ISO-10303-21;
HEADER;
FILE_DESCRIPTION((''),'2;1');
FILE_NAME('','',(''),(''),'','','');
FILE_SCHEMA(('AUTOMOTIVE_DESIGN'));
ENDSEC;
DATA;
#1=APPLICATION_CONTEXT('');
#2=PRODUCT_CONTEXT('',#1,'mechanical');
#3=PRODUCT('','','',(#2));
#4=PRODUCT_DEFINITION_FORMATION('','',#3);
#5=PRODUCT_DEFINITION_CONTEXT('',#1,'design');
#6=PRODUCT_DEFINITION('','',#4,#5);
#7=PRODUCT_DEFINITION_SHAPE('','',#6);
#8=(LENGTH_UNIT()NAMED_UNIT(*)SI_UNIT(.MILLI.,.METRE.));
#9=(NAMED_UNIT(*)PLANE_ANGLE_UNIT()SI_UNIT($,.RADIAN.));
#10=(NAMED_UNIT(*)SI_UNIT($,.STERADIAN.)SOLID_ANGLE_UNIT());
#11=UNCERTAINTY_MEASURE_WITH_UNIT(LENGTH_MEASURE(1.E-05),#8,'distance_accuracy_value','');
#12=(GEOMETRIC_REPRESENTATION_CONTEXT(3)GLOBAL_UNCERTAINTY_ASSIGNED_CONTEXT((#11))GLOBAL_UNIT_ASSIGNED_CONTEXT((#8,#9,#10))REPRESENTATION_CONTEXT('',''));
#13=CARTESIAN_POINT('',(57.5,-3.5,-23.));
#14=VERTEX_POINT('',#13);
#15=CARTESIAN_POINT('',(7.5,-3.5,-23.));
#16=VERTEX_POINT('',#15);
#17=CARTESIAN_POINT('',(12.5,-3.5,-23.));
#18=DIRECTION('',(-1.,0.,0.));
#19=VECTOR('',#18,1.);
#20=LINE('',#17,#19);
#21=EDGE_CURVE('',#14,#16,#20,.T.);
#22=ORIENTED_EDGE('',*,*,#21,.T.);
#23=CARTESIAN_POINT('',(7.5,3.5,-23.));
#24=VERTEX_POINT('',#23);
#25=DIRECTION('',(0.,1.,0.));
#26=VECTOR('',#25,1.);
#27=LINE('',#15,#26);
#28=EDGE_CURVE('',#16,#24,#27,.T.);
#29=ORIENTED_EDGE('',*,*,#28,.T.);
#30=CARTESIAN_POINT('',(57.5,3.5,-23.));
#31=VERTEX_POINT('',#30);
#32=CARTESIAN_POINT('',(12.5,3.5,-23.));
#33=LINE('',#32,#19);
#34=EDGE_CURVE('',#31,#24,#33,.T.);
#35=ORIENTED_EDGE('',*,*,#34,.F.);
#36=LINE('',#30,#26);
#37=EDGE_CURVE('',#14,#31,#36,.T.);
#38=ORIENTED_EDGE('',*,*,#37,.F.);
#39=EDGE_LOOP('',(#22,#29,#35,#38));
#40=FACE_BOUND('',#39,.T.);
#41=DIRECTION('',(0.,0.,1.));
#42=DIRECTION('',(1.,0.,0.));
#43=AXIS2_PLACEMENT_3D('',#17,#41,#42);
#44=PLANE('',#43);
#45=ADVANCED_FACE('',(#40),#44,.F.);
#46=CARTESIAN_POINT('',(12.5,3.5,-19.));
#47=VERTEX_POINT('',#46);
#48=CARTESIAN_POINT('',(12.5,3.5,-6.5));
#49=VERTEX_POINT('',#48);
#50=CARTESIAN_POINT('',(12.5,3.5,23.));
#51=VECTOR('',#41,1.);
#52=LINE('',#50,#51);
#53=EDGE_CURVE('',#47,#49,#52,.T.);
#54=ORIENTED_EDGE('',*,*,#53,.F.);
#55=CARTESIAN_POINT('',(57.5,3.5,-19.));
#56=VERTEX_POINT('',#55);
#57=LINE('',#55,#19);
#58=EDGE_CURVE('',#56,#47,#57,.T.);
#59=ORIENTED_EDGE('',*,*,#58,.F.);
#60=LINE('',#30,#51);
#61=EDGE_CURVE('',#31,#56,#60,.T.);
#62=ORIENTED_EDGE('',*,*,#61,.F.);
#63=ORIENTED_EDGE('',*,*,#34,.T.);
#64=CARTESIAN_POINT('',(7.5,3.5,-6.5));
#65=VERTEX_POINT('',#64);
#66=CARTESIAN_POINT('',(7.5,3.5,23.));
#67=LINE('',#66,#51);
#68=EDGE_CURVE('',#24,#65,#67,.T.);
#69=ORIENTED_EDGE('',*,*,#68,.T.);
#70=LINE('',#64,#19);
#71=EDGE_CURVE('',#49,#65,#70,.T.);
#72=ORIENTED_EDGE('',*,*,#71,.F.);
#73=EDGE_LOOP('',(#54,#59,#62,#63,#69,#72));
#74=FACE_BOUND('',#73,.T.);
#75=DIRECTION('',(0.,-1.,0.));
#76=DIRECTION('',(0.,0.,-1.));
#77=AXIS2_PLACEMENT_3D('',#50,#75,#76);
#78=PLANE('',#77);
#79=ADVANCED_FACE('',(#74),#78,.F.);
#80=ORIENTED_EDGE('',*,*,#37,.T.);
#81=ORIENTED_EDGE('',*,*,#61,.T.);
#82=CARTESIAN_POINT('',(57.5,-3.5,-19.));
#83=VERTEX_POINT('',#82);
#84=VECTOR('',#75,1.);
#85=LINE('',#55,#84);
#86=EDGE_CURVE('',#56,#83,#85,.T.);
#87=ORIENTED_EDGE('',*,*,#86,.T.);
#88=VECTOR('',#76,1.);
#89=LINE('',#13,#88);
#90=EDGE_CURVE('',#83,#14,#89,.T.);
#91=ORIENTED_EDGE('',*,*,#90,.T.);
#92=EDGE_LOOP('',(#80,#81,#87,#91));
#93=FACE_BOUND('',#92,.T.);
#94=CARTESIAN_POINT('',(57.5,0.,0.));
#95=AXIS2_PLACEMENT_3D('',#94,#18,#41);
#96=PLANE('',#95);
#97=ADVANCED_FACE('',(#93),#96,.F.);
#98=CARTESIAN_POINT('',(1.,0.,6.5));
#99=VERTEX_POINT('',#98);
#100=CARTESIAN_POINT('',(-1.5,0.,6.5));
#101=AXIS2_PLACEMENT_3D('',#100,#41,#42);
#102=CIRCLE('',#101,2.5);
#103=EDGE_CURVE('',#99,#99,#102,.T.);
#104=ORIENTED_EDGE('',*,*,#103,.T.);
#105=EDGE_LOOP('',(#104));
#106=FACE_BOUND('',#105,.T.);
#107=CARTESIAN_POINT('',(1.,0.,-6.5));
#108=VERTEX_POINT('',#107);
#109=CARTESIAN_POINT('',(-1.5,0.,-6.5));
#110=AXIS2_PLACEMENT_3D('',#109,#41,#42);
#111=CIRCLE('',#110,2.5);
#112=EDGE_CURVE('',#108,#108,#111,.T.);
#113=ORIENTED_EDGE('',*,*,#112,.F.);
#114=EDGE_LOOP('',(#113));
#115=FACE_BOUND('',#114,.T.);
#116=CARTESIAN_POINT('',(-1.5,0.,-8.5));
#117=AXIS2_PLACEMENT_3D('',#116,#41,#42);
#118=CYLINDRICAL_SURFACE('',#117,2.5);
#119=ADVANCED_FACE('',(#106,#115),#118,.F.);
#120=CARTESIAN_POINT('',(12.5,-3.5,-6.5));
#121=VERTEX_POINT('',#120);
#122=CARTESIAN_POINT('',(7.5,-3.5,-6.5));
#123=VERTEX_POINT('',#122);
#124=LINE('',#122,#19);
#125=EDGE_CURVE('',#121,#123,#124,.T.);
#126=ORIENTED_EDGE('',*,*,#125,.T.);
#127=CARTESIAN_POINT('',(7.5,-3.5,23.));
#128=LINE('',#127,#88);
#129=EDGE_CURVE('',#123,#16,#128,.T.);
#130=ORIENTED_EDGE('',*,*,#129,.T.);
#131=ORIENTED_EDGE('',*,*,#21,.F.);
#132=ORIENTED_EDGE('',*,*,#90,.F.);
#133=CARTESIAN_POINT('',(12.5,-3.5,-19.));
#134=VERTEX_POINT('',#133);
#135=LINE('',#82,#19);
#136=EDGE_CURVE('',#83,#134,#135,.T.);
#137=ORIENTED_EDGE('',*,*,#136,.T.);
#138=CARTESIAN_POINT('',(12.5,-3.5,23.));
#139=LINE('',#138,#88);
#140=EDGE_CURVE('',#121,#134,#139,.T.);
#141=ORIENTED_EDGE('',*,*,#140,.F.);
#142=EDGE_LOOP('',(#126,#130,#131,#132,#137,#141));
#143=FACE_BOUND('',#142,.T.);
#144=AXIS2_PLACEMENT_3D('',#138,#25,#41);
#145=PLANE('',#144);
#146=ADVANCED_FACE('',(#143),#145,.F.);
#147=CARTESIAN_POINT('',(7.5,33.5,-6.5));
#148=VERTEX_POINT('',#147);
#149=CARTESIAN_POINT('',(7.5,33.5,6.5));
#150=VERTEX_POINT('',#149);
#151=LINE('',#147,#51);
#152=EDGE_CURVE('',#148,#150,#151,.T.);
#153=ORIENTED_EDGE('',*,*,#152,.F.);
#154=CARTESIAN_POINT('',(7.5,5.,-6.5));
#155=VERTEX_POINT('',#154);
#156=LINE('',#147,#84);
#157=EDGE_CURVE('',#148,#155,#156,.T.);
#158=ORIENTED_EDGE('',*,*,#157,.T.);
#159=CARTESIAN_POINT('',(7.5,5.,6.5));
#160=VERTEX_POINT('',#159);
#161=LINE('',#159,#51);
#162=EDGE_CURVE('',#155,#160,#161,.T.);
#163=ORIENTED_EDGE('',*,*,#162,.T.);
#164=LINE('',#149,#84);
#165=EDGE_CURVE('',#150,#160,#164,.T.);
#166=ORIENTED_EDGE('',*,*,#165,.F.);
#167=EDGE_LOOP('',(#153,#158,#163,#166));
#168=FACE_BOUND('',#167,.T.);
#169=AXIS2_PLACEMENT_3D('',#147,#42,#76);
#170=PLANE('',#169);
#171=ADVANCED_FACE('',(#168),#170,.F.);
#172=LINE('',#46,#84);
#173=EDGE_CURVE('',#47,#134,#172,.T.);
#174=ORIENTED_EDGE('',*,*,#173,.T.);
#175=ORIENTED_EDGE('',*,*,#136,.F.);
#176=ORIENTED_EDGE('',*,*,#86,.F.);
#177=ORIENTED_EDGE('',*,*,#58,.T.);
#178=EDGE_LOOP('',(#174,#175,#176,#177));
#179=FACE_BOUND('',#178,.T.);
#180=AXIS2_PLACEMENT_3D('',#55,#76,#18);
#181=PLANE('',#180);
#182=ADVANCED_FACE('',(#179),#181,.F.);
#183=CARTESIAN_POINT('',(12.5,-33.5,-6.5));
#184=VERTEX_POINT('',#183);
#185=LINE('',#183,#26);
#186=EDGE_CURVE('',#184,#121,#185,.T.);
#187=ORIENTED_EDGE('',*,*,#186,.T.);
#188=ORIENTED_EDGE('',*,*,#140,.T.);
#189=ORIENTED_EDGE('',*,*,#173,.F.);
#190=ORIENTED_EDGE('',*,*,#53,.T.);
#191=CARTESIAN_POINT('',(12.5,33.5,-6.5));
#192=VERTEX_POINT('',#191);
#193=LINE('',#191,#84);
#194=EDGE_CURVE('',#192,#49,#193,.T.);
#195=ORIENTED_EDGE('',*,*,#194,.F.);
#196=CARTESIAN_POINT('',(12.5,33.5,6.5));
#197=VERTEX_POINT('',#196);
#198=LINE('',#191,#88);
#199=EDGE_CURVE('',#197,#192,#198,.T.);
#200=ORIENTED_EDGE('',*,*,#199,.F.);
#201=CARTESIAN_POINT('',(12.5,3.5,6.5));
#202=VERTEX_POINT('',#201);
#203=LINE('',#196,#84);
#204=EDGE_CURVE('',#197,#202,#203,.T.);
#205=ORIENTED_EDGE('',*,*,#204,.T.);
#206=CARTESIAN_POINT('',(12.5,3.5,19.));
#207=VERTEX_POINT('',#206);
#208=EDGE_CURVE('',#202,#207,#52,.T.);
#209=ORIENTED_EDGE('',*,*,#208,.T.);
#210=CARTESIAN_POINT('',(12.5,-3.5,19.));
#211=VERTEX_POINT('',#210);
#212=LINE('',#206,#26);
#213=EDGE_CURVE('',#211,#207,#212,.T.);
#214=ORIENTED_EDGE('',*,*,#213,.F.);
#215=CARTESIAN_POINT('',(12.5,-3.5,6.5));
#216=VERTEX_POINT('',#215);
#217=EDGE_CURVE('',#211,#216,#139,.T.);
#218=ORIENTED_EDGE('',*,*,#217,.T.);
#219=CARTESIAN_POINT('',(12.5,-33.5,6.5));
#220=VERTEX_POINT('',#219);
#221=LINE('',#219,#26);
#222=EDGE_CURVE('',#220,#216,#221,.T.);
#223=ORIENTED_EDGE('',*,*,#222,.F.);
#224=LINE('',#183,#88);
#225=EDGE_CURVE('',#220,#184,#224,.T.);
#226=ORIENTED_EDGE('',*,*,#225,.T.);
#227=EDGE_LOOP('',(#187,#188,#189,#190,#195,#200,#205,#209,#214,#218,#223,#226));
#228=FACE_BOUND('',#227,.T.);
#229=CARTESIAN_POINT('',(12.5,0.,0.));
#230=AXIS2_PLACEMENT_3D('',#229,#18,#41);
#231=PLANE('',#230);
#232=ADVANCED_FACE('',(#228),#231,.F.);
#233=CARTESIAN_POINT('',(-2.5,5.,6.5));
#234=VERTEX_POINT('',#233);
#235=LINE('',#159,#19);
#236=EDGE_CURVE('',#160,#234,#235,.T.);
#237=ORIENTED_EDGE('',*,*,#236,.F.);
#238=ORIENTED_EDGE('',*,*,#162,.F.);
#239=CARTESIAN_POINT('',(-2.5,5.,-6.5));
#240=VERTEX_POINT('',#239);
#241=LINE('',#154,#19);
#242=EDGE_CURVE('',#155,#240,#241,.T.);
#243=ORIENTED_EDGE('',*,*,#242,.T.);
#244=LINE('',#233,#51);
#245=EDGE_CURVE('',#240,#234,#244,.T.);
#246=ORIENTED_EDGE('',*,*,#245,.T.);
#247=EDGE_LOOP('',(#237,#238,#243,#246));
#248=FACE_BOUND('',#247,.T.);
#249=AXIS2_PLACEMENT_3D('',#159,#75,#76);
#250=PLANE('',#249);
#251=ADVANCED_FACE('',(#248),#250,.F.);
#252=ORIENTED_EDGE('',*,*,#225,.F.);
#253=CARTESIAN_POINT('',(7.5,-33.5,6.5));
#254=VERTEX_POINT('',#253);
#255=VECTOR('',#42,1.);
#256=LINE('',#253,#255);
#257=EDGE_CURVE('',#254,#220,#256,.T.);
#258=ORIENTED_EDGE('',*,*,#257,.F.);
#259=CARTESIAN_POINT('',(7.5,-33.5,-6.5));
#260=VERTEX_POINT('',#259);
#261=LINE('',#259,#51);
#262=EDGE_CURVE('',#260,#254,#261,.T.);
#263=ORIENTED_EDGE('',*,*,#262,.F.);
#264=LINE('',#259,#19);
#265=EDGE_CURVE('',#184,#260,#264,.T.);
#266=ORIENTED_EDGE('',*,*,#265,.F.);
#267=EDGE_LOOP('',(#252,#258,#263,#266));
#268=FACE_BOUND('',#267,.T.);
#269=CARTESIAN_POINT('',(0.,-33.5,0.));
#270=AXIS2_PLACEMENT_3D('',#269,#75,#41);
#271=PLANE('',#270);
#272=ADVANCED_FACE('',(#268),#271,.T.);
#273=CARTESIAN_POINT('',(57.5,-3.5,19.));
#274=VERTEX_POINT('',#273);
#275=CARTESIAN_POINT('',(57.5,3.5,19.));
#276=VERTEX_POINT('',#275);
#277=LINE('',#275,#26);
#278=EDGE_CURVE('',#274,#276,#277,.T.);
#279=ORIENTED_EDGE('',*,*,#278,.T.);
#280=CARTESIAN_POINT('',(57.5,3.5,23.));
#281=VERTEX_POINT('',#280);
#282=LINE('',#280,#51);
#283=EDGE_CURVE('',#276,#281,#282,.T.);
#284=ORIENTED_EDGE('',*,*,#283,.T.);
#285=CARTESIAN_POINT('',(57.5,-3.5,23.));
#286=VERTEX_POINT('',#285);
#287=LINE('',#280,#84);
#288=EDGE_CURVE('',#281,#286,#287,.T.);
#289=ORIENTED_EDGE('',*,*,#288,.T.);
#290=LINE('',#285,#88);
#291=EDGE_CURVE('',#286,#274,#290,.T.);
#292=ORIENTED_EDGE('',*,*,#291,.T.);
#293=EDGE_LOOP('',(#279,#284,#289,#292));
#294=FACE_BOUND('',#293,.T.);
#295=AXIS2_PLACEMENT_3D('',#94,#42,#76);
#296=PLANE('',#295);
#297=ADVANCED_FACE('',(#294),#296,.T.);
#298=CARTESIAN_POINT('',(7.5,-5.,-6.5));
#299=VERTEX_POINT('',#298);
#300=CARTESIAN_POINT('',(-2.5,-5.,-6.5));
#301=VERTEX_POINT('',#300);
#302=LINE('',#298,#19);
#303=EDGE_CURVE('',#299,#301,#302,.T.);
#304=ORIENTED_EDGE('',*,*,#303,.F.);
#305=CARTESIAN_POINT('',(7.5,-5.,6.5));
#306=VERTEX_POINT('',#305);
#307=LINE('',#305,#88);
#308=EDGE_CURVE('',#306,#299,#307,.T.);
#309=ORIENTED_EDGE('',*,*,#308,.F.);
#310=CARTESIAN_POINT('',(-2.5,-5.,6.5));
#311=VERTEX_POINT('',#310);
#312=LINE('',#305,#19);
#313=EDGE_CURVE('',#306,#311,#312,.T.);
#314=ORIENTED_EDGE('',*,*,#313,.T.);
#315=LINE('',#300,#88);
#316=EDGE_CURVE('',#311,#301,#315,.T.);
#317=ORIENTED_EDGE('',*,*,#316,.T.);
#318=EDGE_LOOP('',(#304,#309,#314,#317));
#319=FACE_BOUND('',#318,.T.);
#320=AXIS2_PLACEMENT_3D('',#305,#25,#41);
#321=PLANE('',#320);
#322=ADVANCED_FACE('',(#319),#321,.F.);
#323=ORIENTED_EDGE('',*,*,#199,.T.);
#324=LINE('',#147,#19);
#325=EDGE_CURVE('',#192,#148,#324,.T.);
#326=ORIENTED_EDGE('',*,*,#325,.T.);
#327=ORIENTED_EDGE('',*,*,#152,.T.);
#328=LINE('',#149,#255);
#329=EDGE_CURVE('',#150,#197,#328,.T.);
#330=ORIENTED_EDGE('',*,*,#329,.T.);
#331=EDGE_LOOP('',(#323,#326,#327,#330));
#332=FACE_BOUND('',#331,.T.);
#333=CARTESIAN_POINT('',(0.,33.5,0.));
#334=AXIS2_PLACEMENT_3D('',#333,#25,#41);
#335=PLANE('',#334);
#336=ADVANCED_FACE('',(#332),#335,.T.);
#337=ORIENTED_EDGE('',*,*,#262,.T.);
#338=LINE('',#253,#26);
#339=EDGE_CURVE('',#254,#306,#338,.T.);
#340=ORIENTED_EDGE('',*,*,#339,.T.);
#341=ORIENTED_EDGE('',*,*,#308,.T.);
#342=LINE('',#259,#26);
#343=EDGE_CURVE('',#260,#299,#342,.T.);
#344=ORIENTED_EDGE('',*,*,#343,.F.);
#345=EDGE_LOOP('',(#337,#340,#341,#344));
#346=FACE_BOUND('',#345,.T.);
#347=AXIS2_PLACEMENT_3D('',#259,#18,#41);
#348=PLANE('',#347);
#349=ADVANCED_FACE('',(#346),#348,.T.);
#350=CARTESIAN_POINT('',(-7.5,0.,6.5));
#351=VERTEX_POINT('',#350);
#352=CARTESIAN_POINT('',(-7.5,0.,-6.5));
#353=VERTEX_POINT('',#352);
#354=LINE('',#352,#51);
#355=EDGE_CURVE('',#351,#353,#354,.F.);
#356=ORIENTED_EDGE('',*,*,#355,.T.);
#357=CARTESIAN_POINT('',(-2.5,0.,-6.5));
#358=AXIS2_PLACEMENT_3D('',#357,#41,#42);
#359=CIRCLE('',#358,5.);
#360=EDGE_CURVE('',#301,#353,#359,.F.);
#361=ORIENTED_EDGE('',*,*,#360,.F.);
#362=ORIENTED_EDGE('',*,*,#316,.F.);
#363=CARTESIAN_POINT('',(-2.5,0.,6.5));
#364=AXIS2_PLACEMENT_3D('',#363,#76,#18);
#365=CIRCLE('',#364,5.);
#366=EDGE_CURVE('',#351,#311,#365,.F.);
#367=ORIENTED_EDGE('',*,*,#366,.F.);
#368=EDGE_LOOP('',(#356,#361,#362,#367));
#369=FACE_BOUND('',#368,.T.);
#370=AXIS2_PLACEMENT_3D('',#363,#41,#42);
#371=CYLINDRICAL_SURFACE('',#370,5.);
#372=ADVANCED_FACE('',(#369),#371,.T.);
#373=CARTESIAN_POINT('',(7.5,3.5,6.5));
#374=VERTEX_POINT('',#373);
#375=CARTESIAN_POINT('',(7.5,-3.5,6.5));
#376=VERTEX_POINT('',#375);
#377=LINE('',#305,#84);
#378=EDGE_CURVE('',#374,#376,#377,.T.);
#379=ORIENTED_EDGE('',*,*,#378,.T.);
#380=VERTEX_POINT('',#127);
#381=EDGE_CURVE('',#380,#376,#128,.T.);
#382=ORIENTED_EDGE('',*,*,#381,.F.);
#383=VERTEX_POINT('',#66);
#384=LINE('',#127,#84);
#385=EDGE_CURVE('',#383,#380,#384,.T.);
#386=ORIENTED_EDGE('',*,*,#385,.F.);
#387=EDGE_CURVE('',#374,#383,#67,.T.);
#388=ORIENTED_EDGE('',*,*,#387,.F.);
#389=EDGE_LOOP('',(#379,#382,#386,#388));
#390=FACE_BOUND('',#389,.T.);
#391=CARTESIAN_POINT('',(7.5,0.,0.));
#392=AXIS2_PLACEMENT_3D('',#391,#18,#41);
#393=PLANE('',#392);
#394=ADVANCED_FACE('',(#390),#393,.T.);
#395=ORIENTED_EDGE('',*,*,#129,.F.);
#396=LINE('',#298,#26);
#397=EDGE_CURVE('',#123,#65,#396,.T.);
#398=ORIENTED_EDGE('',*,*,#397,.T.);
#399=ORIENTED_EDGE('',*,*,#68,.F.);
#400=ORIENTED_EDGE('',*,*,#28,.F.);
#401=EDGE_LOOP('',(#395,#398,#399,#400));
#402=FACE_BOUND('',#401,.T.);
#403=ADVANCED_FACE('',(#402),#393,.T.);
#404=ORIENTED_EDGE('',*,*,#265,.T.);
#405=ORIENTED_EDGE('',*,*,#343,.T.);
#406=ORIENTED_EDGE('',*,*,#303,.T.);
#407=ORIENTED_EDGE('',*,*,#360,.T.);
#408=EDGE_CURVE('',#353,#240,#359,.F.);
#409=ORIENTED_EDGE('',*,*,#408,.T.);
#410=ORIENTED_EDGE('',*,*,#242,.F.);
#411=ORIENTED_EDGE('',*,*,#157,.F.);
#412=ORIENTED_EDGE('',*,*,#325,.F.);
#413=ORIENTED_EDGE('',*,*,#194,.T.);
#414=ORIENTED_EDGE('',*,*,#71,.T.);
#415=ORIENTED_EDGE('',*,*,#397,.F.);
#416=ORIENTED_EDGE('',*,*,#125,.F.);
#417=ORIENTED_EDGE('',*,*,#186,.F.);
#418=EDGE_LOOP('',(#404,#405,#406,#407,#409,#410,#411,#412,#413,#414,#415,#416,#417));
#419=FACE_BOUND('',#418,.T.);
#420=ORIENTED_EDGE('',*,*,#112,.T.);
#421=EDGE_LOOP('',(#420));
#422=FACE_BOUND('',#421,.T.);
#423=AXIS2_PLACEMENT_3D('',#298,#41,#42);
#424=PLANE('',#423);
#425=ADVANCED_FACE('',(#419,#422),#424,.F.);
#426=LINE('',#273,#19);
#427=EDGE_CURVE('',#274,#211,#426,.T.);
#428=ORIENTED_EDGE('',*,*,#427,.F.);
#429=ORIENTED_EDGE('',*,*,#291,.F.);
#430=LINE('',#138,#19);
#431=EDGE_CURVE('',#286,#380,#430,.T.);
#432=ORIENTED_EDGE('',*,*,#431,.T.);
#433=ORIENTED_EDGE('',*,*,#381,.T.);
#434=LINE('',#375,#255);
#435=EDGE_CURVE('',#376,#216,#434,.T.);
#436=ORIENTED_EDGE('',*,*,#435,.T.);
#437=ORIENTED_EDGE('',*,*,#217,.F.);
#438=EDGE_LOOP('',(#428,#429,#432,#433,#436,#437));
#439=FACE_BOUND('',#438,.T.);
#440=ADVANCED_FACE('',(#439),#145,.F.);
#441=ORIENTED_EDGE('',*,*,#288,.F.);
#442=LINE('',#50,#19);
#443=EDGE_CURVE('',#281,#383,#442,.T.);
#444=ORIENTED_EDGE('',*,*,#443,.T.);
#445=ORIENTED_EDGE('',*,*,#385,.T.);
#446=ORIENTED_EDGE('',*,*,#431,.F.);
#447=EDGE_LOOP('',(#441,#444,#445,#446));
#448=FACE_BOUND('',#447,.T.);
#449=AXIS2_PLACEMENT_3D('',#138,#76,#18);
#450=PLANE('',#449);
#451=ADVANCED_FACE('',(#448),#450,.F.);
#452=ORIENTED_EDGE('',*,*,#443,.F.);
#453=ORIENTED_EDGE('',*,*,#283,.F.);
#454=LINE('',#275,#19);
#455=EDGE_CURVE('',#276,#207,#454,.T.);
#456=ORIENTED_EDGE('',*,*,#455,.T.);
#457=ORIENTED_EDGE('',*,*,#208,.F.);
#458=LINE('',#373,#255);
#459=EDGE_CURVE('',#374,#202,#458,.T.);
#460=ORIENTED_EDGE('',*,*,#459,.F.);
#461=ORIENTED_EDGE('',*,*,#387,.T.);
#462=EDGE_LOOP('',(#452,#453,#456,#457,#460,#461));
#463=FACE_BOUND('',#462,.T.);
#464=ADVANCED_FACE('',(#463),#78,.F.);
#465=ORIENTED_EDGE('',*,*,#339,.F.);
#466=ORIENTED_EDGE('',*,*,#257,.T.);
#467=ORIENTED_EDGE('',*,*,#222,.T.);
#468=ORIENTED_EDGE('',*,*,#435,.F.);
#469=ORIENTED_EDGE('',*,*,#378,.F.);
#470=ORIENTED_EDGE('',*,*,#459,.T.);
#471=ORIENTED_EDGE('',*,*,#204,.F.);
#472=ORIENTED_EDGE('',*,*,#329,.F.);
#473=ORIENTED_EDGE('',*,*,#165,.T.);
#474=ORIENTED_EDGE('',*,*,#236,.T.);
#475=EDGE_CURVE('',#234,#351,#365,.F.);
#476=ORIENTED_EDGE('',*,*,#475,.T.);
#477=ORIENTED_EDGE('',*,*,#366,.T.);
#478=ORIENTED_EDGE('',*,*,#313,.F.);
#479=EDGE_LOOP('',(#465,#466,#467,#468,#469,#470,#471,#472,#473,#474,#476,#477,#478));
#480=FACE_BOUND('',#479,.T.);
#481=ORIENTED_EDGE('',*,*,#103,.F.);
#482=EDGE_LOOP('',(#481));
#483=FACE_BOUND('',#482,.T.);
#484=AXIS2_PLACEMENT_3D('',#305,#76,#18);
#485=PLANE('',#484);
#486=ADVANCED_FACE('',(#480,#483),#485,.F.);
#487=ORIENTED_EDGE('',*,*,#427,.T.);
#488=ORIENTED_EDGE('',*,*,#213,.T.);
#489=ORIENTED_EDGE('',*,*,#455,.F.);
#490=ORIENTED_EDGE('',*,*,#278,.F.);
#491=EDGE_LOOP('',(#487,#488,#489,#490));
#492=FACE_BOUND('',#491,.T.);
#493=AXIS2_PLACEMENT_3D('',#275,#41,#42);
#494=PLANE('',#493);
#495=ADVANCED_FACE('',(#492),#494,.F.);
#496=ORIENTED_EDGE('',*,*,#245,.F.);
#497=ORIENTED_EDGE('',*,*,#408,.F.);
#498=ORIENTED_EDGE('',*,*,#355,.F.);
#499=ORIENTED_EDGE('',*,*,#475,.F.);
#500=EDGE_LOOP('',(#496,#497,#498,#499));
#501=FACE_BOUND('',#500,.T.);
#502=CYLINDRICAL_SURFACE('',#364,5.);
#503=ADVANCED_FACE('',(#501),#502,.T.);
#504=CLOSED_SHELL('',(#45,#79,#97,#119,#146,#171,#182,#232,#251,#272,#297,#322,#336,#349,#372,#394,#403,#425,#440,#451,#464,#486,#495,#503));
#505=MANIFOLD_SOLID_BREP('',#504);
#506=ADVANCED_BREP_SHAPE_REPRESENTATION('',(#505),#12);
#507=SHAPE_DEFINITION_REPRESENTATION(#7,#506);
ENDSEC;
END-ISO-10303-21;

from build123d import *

# Parameters (mm, degrees)
SKETCH1_W           = 13
SKETCH1_H           = 10
BOSS_EXTRUDE1_DEPTH = 7.5
SKETCH2_R           = 2.5
CUT_EXTRUDE1_DEPTH  = 15
FILLET1_R           = 5
SKETCH3_W           = 46
SKETCH3_H           = 7
BOSS_EXTRUDE2_DEPTH = 5
SKETCH4_W           = 4
SKETCH4_H           = 7
BOSS_EXTRUDE3_DEPTH = 45
SKETCH5_W           = 5
SKETCH5_H           = 13
BOSS_EXTRUDE4_DEPTH = 30


with BuildPart() as part:
    # Sketch1 → Boss-Extrude1 (new, symmetric)
    with BuildSketch(Plane(origin=(0, 0, 0), x_dir=(0, 0, -1), z_dir=(1, 0, 0))):
        Rectangle(SKETCH1_W, SKETCH1_H)
    extrude(amount=BOSS_EXTRUDE1_DEPTH, both=True)

    # Sketch2 → Cut-Extrude1 (cut)
    with BuildSketch(Plane.XY.offset(6.5)):
        with Locations((-1.5, 0)):
            Circle(SKETCH2_R)
    extrude(amount=-CUT_EXTRUDE1_DEPTH, mode=Mode.SUBTRACT)

    # Fillet1
    fillet1_edges = [part.edges().sort_by_distance(p)[0] for p in [
        (-7.5, -5, 0),
        (-7.5, 5, 0),
    ]]
    fillet(fillet1_edges, radius=FILLET1_R - 0.0001)  # a hair under: the kernel refuses the full size

    # Sketch3 → Boss-Extrude2 (add)
    with BuildSketch(Plane(origin=(7.5, 0, 0), x_dir=(0, 0, -1), z_dir=(1, 0, 0))):
        Rectangle(SKETCH3_W, SKETCH3_H)
    extrude(amount=BOSS_EXTRUDE2_DEPTH)

    # Sketch4 → Boss-Extrude3 (add)
    with BuildSketch(Plane(origin=(12.5, 0, 0), x_dir=(0, 0, -1), z_dir=(1, 0, 0))):
        with Locations((-21, 0)):
            Rectangle(SKETCH4_W, SKETCH4_H)
        with Locations((21, 0)):
            Rectangle(SKETCH4_W, SKETCH4_H)
    extrude(amount=BOSS_EXTRUDE3_DEPTH)

    # Sketch5 → Boss-Extrude4 (add)
    with BuildSketch(Plane(origin=(0, 3.5, 0), x_dir=(1, 0, 0), z_dir=(0, 1, 0))):
        with Locations((10, 0)):
            Rectangle(SKETCH5_W, SKETCH5_H)
    boss_extrude4 = extrude(amount=BOSS_EXTRUDE4_DEPTH)

    # Mirror1: Boss-Extrude4 across plane
    add(boss_extrude4.mirror(Plane.ZX))


solid = part.part
